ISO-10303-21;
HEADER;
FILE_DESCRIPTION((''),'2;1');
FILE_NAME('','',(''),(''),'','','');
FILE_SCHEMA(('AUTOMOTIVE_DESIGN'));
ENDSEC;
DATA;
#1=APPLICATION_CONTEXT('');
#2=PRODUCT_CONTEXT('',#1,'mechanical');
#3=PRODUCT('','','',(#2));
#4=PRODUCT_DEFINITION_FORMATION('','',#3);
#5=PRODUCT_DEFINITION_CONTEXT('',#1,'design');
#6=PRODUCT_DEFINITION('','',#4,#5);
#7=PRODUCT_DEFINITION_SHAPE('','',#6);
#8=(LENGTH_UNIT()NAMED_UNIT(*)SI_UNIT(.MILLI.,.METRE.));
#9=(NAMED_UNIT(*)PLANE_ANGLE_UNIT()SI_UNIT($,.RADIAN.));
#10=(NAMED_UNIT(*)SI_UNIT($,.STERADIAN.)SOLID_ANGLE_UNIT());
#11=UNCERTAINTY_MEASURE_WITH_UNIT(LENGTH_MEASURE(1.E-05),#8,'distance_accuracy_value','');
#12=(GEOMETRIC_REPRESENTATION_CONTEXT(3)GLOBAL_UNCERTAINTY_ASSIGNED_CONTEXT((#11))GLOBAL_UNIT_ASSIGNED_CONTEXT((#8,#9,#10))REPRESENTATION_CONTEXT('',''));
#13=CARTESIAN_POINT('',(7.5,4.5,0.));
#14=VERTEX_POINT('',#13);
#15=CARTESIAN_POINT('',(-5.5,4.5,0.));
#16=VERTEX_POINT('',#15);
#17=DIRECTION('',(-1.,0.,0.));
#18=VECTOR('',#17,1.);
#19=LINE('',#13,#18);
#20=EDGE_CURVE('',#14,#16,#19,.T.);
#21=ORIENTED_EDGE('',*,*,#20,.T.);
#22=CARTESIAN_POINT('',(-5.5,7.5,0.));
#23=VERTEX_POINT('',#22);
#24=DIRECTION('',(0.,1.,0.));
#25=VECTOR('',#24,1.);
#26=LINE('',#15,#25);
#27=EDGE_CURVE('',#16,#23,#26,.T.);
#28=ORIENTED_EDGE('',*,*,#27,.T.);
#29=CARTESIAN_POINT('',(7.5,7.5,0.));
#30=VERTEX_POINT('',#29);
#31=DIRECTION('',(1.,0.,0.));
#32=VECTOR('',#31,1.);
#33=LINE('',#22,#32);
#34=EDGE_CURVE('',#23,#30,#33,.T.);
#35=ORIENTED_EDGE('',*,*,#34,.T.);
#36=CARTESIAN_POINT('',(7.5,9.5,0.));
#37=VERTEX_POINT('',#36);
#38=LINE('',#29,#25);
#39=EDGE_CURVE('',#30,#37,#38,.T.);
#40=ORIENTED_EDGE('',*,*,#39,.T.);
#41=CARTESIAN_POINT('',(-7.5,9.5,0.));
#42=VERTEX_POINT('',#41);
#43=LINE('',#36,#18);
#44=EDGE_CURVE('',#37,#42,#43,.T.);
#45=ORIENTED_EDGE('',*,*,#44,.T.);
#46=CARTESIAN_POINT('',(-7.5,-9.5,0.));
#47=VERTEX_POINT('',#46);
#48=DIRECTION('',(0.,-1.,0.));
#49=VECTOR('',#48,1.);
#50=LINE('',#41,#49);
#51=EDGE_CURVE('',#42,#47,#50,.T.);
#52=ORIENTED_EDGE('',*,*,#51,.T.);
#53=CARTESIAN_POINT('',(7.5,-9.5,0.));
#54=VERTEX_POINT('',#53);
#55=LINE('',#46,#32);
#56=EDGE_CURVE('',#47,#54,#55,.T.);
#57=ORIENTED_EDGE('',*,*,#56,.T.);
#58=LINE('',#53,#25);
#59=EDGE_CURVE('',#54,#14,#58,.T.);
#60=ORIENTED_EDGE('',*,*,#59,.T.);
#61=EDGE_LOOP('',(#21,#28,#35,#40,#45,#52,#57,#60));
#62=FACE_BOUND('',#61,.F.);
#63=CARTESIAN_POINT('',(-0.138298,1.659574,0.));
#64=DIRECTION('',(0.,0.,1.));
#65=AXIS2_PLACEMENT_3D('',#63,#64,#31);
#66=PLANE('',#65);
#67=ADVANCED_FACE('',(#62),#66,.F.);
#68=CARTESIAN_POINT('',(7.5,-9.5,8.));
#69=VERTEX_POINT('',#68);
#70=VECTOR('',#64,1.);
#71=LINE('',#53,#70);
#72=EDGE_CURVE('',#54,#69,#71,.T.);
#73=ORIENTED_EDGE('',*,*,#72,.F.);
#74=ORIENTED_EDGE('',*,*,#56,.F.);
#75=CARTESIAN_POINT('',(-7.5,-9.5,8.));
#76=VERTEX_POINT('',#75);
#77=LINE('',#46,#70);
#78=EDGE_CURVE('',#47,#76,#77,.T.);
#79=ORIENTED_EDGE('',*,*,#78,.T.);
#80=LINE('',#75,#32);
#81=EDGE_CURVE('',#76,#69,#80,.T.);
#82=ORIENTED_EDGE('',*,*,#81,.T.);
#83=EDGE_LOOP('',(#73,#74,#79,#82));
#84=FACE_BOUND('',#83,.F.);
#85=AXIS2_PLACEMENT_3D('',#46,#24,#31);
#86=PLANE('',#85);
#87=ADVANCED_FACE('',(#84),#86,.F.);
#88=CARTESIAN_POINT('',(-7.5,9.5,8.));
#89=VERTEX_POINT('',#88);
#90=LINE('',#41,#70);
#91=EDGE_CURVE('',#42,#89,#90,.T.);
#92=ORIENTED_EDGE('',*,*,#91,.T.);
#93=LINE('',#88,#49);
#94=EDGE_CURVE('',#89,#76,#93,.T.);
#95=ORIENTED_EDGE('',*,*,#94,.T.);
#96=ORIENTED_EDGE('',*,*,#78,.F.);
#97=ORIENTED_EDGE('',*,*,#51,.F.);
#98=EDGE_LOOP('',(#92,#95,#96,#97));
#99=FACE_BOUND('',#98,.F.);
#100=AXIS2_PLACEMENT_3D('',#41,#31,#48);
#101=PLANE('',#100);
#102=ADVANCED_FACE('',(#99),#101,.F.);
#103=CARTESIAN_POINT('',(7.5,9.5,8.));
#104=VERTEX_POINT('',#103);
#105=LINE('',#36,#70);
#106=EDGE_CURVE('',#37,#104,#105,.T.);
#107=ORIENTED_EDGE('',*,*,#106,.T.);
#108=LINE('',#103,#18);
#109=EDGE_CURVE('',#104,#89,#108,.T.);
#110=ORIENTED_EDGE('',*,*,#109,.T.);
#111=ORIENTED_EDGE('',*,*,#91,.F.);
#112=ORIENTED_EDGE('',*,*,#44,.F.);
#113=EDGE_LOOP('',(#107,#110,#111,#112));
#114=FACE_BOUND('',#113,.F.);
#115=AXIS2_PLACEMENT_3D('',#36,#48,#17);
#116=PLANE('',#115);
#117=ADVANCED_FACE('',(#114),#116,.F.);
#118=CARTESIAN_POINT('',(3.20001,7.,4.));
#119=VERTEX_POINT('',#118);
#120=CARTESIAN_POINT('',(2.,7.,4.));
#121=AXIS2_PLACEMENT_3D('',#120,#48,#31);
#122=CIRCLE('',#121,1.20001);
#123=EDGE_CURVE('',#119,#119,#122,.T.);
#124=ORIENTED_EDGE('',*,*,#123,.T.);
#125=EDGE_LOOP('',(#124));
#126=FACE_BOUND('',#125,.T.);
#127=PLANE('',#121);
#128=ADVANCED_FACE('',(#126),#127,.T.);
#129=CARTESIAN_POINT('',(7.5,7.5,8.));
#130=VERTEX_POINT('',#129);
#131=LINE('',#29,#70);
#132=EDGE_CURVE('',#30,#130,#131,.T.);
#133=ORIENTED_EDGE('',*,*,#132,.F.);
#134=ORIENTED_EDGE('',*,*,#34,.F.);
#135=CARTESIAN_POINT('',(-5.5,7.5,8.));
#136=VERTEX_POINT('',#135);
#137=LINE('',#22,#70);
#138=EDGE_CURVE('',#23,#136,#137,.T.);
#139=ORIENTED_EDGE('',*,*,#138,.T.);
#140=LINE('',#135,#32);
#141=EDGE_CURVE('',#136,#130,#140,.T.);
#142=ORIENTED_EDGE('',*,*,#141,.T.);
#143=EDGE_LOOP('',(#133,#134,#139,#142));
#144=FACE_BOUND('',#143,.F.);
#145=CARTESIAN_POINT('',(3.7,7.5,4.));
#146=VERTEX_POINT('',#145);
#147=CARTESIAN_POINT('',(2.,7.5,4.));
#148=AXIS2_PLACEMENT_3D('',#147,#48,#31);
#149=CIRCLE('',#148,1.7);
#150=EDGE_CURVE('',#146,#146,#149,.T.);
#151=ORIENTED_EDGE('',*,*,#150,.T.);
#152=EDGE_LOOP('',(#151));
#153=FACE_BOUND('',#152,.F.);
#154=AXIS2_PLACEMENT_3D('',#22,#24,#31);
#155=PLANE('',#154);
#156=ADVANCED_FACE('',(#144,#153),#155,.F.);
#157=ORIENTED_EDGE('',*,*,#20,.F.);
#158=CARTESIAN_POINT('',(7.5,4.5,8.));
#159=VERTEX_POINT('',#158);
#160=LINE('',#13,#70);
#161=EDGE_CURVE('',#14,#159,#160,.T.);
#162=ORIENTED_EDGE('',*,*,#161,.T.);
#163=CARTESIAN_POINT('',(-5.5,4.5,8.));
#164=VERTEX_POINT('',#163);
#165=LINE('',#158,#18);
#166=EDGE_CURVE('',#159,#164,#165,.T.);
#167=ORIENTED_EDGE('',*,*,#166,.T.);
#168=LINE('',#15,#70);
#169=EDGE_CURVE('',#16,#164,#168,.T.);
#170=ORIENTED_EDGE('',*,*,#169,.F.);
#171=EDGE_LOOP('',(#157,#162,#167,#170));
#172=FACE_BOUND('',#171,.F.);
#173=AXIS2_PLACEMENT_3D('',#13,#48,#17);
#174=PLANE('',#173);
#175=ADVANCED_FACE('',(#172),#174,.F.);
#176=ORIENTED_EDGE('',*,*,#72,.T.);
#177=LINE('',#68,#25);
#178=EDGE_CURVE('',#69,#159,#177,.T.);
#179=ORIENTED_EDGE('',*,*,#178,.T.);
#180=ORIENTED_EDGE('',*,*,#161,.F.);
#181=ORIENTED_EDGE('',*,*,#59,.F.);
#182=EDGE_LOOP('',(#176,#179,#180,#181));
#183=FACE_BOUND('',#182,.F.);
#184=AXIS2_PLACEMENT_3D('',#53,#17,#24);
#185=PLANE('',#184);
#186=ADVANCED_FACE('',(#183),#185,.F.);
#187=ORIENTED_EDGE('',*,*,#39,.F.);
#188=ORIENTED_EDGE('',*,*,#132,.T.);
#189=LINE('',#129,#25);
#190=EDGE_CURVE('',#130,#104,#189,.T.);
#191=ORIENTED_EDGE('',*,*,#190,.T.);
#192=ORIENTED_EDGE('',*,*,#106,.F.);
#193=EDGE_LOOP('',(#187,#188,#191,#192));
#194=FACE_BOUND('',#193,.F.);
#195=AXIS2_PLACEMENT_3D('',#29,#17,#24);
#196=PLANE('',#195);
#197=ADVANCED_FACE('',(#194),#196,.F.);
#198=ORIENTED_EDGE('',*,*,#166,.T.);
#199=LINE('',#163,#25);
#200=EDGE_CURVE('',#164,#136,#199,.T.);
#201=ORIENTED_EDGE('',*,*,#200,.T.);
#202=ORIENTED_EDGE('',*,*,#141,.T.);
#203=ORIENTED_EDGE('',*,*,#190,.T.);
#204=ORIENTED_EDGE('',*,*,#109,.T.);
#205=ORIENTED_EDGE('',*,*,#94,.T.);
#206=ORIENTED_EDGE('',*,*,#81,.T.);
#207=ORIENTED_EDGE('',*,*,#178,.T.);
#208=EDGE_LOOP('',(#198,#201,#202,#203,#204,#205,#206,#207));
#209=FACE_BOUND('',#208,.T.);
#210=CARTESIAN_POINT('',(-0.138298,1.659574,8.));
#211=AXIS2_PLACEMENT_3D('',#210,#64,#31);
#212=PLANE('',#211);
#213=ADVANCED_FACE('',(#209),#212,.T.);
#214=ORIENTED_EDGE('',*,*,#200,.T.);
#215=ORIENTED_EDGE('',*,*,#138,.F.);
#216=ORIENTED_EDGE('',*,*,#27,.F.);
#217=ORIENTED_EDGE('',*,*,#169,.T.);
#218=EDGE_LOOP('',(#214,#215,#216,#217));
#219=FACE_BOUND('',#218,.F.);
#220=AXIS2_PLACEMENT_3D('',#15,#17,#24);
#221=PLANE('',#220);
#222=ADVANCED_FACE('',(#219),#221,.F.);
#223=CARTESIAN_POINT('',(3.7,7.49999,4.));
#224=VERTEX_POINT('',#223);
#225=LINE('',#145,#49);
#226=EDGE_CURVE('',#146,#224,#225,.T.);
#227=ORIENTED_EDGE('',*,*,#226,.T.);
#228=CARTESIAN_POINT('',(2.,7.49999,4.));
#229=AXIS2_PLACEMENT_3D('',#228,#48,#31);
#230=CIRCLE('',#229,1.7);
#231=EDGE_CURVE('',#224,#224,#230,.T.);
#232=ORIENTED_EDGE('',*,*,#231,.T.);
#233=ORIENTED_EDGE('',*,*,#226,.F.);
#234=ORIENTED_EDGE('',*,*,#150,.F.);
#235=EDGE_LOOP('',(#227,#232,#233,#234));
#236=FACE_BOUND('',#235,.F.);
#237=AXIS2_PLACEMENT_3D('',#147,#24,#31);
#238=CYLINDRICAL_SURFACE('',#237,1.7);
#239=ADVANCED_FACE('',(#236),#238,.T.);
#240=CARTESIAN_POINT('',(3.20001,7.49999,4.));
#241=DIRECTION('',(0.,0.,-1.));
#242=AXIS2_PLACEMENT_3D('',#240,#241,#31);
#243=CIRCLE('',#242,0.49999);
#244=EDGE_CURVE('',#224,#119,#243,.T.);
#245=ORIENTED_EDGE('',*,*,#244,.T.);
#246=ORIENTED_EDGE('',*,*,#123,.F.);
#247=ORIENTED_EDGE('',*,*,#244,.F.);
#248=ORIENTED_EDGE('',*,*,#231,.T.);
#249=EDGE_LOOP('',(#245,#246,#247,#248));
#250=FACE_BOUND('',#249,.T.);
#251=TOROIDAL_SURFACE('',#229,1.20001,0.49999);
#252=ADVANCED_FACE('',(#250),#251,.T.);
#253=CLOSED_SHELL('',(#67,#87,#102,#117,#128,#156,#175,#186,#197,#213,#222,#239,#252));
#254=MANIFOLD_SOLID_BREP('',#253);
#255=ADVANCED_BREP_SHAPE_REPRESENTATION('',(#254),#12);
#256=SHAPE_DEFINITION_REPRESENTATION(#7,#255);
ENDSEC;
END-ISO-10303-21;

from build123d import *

# Parameters (mm, degrees)
F1_DEPTH = 8
F2_R     = 1.7
F3_DEPTH = 0.5
F4_R     = 0.49999


# Not quite as in the source:
# - a fillet or chamfer is up to 0.001 mm smaller than in the source, because OpenCascade refuses the exact size


with BuildPart() as f1:
    # F0 (on Top) → F1 (new body)
    with BuildSketch(Plane.XY):
        Polygon((-7.5, -9.5), (7.5, -9.5), (7.5, 4.5), (-5.5, 4.5), (-5.5, 7.5), (7.5, 7.5), (7.5, 9.5), (-7.5, 9.5), align=None)
    extrude(amount=F1_DEPTH)

    # F2 (on face) → F3 (join)
    with BuildSketch(Plane.XZ.offset(-7.5)):
        with Locations((2, 4)):
            Circle(F2_R)
    extrude(amount=F3_DEPTH)

    # F4 (radius 0.5 in the source; OpenCascade refuses exactly that, so slightly less here)
    f4_edges = [f1.edges().sort_by_distance(p)[0] for p in [
        (0.3, 7, 4),
    ]]
    fillet(f4_edges, radius=F4_R)


solid = f1.part
